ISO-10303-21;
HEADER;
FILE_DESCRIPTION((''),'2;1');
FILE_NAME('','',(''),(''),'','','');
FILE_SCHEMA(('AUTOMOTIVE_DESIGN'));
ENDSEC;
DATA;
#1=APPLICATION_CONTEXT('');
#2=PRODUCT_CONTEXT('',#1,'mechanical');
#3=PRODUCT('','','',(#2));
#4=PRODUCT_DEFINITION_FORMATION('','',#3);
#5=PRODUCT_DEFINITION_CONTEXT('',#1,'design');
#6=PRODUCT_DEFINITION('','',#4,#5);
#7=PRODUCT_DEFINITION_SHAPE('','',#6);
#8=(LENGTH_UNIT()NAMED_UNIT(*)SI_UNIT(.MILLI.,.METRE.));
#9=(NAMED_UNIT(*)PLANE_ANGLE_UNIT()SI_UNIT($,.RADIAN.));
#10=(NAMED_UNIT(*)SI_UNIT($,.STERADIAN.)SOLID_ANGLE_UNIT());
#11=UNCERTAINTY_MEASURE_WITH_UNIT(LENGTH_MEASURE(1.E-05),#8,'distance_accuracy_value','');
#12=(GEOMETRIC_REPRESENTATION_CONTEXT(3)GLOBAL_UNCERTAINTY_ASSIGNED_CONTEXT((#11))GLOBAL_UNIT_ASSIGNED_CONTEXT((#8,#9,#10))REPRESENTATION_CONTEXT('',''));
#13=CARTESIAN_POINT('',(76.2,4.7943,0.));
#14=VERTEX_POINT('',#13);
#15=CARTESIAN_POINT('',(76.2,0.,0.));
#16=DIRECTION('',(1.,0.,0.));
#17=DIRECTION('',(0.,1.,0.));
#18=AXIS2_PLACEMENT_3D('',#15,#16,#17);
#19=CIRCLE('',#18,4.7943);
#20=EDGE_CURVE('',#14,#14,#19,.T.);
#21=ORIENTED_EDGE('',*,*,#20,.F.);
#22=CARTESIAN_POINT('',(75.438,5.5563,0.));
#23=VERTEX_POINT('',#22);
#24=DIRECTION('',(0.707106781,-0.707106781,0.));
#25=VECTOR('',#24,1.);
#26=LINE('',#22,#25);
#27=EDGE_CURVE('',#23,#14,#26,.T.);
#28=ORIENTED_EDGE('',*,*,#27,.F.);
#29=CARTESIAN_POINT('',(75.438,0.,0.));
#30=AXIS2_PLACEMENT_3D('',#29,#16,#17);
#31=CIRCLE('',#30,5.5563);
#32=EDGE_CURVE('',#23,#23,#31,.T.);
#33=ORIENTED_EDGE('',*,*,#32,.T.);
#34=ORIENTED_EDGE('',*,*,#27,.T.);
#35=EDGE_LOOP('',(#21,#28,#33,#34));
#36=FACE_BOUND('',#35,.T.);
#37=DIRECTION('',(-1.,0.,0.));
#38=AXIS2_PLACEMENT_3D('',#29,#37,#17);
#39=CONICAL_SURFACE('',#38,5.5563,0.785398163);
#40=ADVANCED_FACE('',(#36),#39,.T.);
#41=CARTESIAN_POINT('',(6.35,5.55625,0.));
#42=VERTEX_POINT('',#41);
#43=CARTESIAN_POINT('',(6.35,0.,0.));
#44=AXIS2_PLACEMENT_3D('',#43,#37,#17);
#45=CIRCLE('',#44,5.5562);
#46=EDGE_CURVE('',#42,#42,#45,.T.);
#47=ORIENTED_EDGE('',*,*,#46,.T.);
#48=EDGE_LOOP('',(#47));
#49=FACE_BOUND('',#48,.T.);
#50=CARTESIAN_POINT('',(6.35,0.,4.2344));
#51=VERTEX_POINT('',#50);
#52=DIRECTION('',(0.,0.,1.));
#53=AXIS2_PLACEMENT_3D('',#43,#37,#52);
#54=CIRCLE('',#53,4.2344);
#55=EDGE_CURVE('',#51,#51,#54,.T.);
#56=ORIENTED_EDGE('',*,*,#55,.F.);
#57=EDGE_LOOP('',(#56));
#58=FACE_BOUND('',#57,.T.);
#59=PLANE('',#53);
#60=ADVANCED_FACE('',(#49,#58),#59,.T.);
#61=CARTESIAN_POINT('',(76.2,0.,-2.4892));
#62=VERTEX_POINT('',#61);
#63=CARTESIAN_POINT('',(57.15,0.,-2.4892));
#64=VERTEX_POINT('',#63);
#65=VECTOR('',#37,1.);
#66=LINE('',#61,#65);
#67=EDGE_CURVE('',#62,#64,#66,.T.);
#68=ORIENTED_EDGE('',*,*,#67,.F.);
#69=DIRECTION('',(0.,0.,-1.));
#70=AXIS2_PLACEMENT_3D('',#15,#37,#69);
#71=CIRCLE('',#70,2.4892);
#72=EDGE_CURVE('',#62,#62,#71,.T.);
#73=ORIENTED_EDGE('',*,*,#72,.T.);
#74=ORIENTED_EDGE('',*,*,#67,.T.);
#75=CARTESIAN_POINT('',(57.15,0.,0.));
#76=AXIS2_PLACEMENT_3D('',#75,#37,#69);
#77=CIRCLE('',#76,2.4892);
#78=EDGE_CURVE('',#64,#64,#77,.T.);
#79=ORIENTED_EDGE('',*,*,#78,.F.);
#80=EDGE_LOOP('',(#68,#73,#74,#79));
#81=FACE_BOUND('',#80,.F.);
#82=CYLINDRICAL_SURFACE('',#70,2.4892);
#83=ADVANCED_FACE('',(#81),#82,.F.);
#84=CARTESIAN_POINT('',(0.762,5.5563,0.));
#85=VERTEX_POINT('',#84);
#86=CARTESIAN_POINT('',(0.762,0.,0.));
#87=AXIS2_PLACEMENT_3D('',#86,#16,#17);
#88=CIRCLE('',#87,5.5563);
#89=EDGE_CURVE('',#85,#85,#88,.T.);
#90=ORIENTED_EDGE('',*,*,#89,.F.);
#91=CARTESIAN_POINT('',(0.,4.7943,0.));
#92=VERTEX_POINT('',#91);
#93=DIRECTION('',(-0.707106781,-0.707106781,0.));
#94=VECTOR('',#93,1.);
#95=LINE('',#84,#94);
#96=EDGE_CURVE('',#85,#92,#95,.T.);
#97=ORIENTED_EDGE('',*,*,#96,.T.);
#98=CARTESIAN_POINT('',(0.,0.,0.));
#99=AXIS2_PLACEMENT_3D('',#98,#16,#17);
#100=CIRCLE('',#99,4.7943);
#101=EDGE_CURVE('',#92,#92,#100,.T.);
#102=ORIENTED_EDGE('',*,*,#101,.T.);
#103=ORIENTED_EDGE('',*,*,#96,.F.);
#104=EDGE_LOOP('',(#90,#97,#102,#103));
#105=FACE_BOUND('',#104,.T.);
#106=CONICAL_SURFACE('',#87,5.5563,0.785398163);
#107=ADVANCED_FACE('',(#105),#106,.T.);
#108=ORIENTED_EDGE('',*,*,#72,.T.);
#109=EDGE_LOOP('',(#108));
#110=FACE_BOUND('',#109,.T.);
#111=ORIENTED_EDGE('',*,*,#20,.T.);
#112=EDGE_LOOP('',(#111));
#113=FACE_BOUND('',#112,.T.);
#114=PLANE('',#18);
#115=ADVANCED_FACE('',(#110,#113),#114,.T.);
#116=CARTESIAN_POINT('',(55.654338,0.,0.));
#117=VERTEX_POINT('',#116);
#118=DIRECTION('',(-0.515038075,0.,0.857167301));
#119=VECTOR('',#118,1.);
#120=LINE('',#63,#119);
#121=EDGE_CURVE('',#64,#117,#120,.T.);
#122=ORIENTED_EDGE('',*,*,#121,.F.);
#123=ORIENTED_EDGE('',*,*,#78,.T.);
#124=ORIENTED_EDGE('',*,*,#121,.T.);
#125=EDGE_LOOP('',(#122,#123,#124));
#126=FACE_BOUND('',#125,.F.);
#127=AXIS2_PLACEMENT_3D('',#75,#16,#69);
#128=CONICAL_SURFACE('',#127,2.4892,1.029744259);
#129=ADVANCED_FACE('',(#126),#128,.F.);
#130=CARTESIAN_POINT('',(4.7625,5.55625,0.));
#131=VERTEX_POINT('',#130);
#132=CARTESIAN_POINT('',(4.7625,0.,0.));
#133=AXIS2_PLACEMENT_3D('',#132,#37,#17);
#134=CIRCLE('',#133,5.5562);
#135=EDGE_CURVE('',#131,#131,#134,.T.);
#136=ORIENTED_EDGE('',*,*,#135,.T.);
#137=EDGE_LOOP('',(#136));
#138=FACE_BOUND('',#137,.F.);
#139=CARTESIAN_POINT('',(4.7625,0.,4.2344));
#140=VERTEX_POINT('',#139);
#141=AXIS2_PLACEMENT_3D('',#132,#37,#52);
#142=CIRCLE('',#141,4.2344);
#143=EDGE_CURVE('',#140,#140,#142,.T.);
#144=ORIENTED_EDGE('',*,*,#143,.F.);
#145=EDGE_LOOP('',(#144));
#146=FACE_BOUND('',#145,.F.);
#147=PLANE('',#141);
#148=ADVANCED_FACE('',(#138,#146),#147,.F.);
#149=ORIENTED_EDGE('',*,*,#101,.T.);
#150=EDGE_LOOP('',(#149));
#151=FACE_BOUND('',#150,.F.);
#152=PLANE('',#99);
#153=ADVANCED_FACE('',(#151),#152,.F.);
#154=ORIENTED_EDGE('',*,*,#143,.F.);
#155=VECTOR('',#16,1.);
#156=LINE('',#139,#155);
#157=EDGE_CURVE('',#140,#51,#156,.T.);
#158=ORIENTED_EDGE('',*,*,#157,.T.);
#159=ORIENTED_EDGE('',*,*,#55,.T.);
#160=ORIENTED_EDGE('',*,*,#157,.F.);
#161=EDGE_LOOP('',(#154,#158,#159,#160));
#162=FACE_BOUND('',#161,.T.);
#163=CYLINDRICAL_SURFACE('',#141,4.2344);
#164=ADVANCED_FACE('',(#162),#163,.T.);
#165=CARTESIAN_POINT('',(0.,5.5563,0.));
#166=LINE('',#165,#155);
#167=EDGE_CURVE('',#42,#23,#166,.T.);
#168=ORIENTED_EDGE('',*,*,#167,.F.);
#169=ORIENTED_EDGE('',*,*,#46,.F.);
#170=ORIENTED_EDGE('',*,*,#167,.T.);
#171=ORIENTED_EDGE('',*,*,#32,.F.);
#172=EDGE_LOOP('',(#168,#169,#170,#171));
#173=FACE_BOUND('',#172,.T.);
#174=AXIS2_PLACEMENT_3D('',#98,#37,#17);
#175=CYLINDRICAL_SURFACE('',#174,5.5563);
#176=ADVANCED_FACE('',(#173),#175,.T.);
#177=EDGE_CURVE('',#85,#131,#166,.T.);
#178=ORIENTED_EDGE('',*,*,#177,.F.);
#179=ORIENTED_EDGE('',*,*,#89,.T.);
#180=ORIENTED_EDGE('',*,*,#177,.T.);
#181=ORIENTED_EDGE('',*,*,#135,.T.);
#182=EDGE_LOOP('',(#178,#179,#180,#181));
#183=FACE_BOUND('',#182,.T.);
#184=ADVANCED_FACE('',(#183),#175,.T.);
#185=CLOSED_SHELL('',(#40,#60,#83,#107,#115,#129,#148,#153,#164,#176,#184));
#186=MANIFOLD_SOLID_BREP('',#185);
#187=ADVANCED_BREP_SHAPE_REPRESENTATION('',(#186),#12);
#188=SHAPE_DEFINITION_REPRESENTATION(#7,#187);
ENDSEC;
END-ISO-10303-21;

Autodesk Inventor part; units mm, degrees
ref_plane "YZ Plane" through (0, 0, 0) normal (1, 0, 0) x (0, 1, 0)
ref_plane "XZ Plane" through (0, 0, 0) normal (0, 1, 0) x (-1, 0, 0)
ref_plane "XY Plane" through (0, 0, 0) normal (0, 0, 1) x (1, 0, 0)
sketch "Sketch1" plane through (0, 0, 0) normal (1, 0, 0) x (0, 1, 0)
  circle A0 centre (0, 0) radius 5.5563
  dimension "d0" = 11.1125
extrude "Extrusion1" add sketch "Sketch1" along normal blind 76.2
chamfer "Chamfer1" distance 0.762 angle 45 2 edges at (76.2, -5.5563, 0) (0, -5.5563, 0)
sketch "Sketch2" plane through (76.2, 0, 0) normal (1, 0, 0) x (0, 0, -1)
  point P0 (0, 0)
sketch "Sketch3" plane through (76.2, 0, 0) normal (1, 0, 0) x (0, 0, -1)
  point P0 (0, 0)
  point P1 (0, 0)
hole "Hole1" at (76.2, 0, 0) direction (-1, 0, 0) diameter 4.9784 depth 19.05 tip angle 118 thread size "1/4-20 UNC" class "2B" standard "ANSI Unified Screw Threads"
sketch "Sketch4" plane through (0, 0, 0) normal (-1, 0, 0) x (0, 0, 1)
  point P0 (0, 0)
ref_plane "Work Plane2" through (4.7625, 0, 0) normal (-1, 0, 0) x (0, 0, 1)
sketch "Sketch5" plane through (4.7625, 0, 0) normal (-1, 0, 0) x (0, 0, 1)
  circle A0 centre (0, 0) radius 5.5562
  circle A1 centre (0, 0) radius 4.2344
extrude "Extrusion2" cut sketch "Sketch5" against normal blind 1.5875
properties part number "upper die center pin"
